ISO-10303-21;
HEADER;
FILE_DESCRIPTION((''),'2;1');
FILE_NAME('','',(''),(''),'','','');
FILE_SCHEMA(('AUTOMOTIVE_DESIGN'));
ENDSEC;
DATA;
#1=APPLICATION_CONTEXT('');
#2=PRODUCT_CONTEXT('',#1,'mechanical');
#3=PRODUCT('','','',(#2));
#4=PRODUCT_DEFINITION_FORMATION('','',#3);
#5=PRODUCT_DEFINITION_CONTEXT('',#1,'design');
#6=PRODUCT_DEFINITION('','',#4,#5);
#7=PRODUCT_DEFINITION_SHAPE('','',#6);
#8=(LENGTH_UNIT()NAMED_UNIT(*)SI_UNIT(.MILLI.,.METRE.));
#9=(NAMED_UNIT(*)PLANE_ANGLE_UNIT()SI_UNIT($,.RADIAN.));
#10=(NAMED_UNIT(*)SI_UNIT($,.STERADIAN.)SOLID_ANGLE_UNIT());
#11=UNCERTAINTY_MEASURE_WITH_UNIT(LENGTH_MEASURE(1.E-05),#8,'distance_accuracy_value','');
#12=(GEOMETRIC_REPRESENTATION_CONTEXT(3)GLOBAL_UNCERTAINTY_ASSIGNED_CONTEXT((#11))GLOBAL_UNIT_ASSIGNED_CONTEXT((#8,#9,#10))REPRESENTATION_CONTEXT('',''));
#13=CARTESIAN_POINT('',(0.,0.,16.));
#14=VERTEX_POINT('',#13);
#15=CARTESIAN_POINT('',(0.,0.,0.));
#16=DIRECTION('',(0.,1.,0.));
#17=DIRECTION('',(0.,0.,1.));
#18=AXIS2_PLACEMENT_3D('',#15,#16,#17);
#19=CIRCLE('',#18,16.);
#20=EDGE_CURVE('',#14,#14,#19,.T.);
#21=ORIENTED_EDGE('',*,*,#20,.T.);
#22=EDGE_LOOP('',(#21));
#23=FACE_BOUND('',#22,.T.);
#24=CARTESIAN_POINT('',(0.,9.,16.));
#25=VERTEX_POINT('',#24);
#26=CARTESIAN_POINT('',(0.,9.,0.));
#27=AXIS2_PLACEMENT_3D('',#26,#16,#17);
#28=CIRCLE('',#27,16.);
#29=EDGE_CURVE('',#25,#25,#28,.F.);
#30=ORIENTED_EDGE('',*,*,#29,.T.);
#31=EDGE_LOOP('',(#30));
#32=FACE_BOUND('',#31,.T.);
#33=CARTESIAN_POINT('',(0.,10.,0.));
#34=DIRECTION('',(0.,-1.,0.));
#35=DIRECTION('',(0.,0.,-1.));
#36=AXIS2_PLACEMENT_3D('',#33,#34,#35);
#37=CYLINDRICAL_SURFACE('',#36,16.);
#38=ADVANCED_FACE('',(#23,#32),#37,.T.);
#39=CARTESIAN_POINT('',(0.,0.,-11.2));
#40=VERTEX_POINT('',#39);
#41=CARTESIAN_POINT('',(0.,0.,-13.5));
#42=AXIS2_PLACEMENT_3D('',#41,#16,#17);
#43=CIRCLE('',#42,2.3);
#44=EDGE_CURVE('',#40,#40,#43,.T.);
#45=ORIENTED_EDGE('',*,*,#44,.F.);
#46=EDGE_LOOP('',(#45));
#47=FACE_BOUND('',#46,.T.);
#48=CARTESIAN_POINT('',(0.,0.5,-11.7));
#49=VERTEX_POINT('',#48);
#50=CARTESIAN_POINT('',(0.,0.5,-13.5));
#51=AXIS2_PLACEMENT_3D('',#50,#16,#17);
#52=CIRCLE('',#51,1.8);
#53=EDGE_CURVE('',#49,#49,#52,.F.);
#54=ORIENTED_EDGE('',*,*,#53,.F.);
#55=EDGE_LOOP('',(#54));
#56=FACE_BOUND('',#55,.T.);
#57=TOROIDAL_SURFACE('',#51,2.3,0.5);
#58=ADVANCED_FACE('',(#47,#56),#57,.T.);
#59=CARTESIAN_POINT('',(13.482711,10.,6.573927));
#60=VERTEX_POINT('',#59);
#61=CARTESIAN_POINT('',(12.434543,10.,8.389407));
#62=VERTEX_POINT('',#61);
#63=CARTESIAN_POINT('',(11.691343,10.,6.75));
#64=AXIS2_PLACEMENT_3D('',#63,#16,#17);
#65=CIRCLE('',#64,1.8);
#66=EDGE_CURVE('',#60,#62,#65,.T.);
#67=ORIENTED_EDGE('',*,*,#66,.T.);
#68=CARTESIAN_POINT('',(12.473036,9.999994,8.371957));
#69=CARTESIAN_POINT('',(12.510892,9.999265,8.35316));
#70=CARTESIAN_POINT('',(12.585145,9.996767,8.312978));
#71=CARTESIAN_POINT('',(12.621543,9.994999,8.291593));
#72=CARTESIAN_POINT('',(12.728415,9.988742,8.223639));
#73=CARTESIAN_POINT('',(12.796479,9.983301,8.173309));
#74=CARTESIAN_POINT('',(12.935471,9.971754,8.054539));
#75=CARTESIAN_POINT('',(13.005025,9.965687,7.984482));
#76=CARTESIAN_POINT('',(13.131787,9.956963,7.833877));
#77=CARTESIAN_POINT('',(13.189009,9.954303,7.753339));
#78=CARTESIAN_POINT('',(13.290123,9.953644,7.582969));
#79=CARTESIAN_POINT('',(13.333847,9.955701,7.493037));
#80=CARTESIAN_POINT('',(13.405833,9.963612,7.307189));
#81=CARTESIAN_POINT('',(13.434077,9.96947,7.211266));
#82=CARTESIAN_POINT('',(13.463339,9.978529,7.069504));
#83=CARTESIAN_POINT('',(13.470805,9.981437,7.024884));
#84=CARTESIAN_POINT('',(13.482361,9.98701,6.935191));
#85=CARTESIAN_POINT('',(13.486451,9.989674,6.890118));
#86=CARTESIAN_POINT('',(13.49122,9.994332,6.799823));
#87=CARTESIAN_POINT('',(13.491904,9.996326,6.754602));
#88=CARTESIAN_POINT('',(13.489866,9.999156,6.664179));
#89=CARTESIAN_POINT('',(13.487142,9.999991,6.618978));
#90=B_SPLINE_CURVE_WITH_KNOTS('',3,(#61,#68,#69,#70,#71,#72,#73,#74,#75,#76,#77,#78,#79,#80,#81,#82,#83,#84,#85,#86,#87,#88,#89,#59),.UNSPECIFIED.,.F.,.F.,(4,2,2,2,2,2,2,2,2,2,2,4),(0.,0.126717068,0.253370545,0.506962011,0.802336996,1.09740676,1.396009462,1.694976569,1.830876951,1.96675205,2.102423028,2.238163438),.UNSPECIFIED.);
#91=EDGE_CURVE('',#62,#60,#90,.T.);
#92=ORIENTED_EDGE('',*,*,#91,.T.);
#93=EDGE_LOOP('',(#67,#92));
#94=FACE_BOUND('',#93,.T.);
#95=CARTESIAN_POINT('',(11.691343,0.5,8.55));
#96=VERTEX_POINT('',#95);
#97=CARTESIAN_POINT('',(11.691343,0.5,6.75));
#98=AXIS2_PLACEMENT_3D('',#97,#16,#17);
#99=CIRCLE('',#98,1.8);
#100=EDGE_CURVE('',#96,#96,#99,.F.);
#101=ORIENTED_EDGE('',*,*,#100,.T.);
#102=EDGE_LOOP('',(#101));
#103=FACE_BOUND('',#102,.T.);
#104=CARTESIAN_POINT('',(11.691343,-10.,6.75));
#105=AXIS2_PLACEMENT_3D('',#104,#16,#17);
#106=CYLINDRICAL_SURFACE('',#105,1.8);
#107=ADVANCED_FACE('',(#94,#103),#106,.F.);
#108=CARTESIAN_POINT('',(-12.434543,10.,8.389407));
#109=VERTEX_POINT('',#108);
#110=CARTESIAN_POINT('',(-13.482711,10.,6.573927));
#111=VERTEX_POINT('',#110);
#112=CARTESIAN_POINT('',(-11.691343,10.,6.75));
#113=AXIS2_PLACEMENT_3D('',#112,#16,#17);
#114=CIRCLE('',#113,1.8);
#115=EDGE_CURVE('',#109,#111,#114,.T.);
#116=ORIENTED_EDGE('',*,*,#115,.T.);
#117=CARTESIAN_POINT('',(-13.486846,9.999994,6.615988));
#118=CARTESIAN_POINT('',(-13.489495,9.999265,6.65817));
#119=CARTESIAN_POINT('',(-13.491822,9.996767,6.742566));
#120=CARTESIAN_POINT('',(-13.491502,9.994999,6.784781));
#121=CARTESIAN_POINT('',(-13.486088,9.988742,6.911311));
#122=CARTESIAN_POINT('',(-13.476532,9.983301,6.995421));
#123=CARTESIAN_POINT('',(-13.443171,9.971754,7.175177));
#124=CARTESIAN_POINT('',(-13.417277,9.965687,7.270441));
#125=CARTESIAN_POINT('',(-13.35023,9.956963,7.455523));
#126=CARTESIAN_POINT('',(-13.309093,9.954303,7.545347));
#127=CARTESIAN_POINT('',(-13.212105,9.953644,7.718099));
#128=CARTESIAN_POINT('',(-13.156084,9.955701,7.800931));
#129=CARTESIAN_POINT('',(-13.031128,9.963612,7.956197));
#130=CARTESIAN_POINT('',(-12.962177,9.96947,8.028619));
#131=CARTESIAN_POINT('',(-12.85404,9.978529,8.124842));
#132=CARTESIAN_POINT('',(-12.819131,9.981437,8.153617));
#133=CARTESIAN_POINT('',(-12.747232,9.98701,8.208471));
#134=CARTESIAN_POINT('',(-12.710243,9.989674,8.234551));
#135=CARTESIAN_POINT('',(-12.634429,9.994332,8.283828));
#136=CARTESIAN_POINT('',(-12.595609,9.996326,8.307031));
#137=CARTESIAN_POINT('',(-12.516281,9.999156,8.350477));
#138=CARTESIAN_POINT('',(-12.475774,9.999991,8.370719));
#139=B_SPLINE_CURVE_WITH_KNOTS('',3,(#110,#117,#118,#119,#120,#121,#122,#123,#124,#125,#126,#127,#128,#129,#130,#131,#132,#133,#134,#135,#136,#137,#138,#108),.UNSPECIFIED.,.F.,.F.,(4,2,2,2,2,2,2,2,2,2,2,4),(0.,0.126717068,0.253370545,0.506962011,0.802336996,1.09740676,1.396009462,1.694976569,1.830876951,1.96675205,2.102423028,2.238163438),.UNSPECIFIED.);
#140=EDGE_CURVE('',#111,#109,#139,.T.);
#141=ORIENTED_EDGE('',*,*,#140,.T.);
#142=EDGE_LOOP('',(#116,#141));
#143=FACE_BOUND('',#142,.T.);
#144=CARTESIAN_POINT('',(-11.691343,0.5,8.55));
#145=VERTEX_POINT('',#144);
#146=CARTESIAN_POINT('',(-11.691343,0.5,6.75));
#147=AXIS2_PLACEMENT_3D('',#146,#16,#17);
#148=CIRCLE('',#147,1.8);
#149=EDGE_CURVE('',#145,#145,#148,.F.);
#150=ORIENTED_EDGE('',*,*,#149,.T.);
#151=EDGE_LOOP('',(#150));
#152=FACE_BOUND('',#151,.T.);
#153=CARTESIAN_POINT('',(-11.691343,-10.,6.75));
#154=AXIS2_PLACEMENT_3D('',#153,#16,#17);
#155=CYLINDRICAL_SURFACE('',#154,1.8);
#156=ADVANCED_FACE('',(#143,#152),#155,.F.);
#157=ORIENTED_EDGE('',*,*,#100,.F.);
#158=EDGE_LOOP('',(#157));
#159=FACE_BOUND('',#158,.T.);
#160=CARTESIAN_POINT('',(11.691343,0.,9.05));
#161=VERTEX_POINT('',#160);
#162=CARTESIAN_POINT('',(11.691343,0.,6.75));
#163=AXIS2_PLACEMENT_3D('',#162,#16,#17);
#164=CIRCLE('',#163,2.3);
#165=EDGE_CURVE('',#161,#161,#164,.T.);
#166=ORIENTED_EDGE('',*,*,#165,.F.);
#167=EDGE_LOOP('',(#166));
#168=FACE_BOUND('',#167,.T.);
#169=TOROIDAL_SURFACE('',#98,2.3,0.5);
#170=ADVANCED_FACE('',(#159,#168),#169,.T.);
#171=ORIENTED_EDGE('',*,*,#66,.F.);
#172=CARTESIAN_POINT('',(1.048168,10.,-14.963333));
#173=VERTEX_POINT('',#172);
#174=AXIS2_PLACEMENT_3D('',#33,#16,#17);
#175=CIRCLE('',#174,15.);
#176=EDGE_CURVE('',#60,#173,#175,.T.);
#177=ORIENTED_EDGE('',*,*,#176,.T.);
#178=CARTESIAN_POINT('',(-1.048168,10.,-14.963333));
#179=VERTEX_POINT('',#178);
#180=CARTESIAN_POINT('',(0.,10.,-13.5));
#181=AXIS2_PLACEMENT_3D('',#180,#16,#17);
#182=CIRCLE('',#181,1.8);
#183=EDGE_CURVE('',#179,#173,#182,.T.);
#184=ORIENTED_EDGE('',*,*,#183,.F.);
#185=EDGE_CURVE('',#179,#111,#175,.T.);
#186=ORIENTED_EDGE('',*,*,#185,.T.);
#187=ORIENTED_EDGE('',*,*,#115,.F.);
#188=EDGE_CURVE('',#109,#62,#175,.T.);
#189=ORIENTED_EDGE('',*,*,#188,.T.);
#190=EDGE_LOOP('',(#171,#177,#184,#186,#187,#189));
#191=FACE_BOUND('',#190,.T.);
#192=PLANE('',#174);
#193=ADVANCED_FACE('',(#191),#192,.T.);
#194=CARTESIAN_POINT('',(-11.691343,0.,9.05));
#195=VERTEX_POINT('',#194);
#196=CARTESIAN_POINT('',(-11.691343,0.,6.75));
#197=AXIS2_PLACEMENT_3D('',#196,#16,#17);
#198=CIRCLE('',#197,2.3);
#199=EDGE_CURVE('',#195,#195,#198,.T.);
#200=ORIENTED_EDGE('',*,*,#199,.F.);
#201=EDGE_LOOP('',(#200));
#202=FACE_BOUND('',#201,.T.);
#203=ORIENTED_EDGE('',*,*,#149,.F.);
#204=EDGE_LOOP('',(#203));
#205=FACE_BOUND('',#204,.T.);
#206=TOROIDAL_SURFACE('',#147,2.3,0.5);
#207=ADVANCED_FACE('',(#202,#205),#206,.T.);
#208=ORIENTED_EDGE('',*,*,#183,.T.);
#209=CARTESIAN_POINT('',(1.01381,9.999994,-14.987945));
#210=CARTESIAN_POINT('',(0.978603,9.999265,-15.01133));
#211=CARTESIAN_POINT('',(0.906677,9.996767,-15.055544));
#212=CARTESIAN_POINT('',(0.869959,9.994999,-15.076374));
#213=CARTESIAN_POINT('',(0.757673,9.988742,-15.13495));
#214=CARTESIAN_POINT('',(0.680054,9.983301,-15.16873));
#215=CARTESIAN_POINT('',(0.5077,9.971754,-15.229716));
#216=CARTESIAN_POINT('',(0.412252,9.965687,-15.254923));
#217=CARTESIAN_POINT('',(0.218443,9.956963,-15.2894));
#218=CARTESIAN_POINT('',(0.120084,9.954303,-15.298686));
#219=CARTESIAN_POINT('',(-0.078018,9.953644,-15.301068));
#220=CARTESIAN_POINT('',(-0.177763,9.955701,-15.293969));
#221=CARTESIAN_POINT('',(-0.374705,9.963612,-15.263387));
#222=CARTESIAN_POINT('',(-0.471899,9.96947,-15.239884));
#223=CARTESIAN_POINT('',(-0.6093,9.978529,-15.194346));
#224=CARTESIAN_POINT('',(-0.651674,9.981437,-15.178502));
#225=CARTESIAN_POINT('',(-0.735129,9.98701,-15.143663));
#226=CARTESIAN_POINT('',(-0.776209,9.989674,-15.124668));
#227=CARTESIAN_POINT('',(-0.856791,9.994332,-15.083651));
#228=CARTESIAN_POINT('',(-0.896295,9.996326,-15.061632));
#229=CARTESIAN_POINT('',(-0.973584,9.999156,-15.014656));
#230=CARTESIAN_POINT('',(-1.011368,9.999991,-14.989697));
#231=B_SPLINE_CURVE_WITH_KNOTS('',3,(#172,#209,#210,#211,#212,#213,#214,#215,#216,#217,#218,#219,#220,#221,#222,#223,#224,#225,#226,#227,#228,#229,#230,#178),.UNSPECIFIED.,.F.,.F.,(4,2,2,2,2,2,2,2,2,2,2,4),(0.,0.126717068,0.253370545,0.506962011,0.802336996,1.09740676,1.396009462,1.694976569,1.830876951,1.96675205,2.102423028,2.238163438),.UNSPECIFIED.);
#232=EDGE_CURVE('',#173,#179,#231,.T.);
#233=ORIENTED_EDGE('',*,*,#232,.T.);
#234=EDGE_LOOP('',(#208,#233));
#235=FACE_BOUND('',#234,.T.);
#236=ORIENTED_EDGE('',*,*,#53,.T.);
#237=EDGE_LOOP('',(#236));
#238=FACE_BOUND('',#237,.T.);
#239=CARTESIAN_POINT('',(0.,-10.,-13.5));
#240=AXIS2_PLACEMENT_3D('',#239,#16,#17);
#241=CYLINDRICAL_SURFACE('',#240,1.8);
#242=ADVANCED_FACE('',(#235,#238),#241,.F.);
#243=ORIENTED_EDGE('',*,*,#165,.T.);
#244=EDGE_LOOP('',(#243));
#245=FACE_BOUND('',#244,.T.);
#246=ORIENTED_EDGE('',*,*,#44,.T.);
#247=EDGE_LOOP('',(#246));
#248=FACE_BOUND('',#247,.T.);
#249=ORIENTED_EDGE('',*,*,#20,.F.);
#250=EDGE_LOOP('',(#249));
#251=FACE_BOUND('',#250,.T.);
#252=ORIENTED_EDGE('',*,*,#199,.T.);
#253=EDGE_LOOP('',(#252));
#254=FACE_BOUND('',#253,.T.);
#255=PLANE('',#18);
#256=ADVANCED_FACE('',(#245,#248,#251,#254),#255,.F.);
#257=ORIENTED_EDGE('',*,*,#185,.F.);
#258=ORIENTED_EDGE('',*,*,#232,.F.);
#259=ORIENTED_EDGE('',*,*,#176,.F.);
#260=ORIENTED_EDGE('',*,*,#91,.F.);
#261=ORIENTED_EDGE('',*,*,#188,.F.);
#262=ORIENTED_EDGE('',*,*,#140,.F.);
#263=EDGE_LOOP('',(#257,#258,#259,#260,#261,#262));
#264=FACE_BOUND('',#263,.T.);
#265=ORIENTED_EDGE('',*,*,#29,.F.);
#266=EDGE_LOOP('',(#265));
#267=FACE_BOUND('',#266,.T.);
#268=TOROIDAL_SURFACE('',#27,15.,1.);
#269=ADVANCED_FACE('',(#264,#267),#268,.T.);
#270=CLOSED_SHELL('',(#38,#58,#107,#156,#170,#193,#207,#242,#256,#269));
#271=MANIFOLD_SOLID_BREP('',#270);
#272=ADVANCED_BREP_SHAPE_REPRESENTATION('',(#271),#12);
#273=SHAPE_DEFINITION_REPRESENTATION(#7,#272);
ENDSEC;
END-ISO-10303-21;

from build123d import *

# Parameters (mm, degrees)
SKETCH_1_R          = 16
EXTRUDE_1_DEPTH     = 10
SKETCH_2_R          = 1.8
CUT_EXTRUDE_1_DEPTH = 20
FILLET_1_R          = 1
FILLET_2_R          = 0.5


with BuildPart() as part:
    # Эскиз1 → Бобышка-Вытянуть1 (new body)
    with BuildSketch(Plane(origin=(0, 0, 0), x_dir=(1, 0, 0), z_dir=(0, 1, 0))):
        with Locations(Location((0, 0, 0), (0, 0, 270))):
            Circle(SKETCH_1_R)
    extrude(amount=EXTRUDE_1_DEPTH)

    # Эскиз2 → Вырез-Вытянуть1 (cut)
    with BuildSketch(Plane(origin=(0, 10, 0), x_dir=(1, 0, 0), z_dir=(0, 1, 0))):
        with Locations(Location((0, 13.5, 0), (0, 0, 270))):
            Circle(SKETCH_2_R)
        with Locations(Location((11.691342951, -6.75, 0), (0, 0, 270))):
            Circle(SKETCH_2_R)
        with Locations(Location((-11.691342951, -6.75, 0), (0, 0, 270))):
            Circle(SKETCH_2_R)
    extrude(amount=-CUT_EXTRUDE_1_DEPTH, mode=Mode.SUBTRACT)

    # Скругление1
    # the kernel refuses this fillet: 1 mm, written as the material it takes off along each edge
    with BuildSketch(Plane(origin=(0, 10, 0), x_dir=(0, 0, 1), z_dir=(-1, 0, 0))) as fillet_1_piece_1:
        with BuildLine():
            CenterArc((16 - FILLET_1_R, -FILLET_1_R), FILLET_1_R, 0, 90)
            Line((16 - FILLET_1_R, 0), (16, 0))
            Line((16, 0), (16, -FILLET_1_R))
        make_face()
    revolve(axis=Axis((0, 10, 0), (0, 1, 0)), mode=Mode.SUBTRACT)

    # Скругление2
    fillet_2_edges = [part.edges().sort_by_distance(p)[0] for p in [
        (11.691342951, 0, 4.95),
        (-11.691342951, 0, 4.95),
        (0, 0, -15.3),
    ]]
    fillet(fillet_2_edges, radius=FILLET_2_R)


solid = part.part
